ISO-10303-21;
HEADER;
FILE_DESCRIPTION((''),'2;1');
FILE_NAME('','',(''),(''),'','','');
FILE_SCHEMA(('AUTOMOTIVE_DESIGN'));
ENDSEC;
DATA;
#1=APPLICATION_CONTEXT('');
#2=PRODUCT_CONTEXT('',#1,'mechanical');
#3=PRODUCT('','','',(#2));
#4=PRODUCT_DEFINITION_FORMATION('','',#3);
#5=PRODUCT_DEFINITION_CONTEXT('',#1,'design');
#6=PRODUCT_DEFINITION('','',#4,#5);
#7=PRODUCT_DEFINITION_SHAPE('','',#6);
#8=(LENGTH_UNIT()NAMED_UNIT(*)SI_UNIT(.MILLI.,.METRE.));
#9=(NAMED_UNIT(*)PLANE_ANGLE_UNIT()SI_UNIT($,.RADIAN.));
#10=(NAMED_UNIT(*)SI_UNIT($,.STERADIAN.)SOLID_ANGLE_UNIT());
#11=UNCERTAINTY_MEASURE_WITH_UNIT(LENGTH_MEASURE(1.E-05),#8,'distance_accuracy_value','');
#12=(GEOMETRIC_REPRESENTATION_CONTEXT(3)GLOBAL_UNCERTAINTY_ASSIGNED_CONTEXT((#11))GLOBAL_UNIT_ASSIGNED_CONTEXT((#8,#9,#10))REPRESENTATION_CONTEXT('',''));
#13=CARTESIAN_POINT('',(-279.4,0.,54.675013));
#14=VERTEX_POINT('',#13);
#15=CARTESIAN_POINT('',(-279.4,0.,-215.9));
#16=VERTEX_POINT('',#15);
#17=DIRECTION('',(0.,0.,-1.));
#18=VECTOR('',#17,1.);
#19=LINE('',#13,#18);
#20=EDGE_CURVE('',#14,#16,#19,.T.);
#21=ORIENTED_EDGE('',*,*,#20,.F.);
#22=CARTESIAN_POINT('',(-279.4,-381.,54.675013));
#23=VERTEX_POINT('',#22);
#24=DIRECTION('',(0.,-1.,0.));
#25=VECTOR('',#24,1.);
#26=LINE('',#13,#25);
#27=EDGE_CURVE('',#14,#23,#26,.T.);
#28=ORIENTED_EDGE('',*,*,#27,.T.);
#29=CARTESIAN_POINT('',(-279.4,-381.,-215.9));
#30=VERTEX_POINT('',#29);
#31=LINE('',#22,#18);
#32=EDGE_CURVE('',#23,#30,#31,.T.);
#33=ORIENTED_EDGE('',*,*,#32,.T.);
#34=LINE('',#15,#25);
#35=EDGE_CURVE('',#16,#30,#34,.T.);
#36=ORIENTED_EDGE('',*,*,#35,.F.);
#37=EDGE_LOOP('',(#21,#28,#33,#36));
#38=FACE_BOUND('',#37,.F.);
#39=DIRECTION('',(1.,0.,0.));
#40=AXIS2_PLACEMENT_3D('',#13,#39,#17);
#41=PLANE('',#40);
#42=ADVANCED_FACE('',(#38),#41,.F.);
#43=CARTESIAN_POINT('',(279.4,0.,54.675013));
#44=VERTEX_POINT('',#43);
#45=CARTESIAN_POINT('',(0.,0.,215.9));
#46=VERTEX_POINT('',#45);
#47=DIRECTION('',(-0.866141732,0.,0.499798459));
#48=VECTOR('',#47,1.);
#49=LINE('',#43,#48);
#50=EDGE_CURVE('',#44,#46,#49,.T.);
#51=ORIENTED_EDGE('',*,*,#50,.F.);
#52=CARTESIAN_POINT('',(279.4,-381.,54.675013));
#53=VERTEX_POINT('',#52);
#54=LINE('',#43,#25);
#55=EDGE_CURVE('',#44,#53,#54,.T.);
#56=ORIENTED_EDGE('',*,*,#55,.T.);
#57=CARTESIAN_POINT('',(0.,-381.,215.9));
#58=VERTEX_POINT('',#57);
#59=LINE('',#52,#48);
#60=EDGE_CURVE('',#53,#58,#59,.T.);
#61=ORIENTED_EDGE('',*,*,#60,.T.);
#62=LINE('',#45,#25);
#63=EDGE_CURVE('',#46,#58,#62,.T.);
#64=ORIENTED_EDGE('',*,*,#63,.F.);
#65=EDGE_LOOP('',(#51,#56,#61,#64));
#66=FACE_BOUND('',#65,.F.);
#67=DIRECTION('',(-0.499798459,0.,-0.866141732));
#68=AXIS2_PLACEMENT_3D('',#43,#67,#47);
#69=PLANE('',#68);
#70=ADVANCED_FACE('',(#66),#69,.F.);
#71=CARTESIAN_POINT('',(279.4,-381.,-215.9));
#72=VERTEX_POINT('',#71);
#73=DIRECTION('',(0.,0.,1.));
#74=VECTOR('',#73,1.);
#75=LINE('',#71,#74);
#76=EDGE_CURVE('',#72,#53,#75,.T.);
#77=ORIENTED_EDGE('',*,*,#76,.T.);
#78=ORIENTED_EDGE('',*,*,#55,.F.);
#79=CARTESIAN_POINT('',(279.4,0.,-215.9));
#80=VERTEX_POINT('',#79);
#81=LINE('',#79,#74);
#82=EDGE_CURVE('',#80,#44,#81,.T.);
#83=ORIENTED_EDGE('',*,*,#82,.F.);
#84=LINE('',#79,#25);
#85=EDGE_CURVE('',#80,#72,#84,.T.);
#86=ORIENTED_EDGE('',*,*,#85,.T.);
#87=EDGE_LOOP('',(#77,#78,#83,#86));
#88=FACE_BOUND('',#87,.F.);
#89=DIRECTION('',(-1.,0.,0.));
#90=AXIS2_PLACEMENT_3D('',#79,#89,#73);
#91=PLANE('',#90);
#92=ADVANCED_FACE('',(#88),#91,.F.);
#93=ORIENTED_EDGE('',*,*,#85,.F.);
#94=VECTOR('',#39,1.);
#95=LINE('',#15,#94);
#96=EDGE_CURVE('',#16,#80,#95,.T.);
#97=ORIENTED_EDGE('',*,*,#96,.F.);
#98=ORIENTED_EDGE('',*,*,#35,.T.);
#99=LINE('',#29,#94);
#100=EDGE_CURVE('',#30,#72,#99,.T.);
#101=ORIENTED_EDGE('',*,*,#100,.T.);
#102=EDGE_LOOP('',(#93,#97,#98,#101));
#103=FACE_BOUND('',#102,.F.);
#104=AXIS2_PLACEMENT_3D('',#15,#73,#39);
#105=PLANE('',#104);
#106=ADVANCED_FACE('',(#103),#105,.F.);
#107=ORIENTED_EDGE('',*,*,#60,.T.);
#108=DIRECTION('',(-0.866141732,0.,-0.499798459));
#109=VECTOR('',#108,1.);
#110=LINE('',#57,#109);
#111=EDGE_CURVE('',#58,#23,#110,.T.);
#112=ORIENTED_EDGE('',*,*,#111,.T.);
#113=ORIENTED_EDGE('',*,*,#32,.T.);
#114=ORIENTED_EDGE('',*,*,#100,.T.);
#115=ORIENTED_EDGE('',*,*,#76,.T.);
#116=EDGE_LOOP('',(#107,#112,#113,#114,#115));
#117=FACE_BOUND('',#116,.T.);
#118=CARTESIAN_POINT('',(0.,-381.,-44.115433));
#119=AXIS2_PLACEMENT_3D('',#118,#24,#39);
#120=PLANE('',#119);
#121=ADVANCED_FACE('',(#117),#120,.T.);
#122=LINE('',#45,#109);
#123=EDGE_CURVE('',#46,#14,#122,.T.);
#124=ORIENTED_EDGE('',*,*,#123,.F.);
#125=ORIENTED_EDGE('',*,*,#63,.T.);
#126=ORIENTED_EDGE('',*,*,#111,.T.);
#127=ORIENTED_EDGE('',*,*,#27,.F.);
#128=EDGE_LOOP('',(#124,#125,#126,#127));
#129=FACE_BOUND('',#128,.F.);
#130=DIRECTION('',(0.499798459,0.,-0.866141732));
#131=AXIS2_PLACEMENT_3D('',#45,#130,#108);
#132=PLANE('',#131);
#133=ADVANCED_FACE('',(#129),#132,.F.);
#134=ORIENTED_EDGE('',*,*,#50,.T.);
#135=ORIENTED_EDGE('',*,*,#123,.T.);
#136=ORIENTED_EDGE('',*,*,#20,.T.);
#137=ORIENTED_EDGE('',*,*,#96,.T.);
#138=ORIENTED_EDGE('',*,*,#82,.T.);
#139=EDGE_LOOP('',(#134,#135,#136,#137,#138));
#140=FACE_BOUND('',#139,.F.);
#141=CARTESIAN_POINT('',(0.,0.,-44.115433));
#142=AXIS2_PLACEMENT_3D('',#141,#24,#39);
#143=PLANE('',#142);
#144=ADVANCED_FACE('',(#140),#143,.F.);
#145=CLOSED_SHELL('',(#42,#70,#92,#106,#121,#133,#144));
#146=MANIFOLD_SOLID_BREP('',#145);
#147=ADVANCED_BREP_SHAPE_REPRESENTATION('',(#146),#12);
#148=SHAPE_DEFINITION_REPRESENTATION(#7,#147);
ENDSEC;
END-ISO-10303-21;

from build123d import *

# Parameters (mm, degrees)
F2_DEPTH = 381


# Not quite as in the source:
# - the program builds the solid bodies; features that only make, move or delete a surface that nothing else refers to are left out


with BuildPart() as f2:
    # F0 (on Front) → F2 (new body)
    with BuildSketch(Plane.XZ):
        Polygon((-279.4, 54.6750131028), (-279.4, -215.9), (279.4, -215.9), (279.4, 54.6750131028), (0, 215.9), align=None)
    extrude(amount=F2_DEPTH)


solid = f2.part
